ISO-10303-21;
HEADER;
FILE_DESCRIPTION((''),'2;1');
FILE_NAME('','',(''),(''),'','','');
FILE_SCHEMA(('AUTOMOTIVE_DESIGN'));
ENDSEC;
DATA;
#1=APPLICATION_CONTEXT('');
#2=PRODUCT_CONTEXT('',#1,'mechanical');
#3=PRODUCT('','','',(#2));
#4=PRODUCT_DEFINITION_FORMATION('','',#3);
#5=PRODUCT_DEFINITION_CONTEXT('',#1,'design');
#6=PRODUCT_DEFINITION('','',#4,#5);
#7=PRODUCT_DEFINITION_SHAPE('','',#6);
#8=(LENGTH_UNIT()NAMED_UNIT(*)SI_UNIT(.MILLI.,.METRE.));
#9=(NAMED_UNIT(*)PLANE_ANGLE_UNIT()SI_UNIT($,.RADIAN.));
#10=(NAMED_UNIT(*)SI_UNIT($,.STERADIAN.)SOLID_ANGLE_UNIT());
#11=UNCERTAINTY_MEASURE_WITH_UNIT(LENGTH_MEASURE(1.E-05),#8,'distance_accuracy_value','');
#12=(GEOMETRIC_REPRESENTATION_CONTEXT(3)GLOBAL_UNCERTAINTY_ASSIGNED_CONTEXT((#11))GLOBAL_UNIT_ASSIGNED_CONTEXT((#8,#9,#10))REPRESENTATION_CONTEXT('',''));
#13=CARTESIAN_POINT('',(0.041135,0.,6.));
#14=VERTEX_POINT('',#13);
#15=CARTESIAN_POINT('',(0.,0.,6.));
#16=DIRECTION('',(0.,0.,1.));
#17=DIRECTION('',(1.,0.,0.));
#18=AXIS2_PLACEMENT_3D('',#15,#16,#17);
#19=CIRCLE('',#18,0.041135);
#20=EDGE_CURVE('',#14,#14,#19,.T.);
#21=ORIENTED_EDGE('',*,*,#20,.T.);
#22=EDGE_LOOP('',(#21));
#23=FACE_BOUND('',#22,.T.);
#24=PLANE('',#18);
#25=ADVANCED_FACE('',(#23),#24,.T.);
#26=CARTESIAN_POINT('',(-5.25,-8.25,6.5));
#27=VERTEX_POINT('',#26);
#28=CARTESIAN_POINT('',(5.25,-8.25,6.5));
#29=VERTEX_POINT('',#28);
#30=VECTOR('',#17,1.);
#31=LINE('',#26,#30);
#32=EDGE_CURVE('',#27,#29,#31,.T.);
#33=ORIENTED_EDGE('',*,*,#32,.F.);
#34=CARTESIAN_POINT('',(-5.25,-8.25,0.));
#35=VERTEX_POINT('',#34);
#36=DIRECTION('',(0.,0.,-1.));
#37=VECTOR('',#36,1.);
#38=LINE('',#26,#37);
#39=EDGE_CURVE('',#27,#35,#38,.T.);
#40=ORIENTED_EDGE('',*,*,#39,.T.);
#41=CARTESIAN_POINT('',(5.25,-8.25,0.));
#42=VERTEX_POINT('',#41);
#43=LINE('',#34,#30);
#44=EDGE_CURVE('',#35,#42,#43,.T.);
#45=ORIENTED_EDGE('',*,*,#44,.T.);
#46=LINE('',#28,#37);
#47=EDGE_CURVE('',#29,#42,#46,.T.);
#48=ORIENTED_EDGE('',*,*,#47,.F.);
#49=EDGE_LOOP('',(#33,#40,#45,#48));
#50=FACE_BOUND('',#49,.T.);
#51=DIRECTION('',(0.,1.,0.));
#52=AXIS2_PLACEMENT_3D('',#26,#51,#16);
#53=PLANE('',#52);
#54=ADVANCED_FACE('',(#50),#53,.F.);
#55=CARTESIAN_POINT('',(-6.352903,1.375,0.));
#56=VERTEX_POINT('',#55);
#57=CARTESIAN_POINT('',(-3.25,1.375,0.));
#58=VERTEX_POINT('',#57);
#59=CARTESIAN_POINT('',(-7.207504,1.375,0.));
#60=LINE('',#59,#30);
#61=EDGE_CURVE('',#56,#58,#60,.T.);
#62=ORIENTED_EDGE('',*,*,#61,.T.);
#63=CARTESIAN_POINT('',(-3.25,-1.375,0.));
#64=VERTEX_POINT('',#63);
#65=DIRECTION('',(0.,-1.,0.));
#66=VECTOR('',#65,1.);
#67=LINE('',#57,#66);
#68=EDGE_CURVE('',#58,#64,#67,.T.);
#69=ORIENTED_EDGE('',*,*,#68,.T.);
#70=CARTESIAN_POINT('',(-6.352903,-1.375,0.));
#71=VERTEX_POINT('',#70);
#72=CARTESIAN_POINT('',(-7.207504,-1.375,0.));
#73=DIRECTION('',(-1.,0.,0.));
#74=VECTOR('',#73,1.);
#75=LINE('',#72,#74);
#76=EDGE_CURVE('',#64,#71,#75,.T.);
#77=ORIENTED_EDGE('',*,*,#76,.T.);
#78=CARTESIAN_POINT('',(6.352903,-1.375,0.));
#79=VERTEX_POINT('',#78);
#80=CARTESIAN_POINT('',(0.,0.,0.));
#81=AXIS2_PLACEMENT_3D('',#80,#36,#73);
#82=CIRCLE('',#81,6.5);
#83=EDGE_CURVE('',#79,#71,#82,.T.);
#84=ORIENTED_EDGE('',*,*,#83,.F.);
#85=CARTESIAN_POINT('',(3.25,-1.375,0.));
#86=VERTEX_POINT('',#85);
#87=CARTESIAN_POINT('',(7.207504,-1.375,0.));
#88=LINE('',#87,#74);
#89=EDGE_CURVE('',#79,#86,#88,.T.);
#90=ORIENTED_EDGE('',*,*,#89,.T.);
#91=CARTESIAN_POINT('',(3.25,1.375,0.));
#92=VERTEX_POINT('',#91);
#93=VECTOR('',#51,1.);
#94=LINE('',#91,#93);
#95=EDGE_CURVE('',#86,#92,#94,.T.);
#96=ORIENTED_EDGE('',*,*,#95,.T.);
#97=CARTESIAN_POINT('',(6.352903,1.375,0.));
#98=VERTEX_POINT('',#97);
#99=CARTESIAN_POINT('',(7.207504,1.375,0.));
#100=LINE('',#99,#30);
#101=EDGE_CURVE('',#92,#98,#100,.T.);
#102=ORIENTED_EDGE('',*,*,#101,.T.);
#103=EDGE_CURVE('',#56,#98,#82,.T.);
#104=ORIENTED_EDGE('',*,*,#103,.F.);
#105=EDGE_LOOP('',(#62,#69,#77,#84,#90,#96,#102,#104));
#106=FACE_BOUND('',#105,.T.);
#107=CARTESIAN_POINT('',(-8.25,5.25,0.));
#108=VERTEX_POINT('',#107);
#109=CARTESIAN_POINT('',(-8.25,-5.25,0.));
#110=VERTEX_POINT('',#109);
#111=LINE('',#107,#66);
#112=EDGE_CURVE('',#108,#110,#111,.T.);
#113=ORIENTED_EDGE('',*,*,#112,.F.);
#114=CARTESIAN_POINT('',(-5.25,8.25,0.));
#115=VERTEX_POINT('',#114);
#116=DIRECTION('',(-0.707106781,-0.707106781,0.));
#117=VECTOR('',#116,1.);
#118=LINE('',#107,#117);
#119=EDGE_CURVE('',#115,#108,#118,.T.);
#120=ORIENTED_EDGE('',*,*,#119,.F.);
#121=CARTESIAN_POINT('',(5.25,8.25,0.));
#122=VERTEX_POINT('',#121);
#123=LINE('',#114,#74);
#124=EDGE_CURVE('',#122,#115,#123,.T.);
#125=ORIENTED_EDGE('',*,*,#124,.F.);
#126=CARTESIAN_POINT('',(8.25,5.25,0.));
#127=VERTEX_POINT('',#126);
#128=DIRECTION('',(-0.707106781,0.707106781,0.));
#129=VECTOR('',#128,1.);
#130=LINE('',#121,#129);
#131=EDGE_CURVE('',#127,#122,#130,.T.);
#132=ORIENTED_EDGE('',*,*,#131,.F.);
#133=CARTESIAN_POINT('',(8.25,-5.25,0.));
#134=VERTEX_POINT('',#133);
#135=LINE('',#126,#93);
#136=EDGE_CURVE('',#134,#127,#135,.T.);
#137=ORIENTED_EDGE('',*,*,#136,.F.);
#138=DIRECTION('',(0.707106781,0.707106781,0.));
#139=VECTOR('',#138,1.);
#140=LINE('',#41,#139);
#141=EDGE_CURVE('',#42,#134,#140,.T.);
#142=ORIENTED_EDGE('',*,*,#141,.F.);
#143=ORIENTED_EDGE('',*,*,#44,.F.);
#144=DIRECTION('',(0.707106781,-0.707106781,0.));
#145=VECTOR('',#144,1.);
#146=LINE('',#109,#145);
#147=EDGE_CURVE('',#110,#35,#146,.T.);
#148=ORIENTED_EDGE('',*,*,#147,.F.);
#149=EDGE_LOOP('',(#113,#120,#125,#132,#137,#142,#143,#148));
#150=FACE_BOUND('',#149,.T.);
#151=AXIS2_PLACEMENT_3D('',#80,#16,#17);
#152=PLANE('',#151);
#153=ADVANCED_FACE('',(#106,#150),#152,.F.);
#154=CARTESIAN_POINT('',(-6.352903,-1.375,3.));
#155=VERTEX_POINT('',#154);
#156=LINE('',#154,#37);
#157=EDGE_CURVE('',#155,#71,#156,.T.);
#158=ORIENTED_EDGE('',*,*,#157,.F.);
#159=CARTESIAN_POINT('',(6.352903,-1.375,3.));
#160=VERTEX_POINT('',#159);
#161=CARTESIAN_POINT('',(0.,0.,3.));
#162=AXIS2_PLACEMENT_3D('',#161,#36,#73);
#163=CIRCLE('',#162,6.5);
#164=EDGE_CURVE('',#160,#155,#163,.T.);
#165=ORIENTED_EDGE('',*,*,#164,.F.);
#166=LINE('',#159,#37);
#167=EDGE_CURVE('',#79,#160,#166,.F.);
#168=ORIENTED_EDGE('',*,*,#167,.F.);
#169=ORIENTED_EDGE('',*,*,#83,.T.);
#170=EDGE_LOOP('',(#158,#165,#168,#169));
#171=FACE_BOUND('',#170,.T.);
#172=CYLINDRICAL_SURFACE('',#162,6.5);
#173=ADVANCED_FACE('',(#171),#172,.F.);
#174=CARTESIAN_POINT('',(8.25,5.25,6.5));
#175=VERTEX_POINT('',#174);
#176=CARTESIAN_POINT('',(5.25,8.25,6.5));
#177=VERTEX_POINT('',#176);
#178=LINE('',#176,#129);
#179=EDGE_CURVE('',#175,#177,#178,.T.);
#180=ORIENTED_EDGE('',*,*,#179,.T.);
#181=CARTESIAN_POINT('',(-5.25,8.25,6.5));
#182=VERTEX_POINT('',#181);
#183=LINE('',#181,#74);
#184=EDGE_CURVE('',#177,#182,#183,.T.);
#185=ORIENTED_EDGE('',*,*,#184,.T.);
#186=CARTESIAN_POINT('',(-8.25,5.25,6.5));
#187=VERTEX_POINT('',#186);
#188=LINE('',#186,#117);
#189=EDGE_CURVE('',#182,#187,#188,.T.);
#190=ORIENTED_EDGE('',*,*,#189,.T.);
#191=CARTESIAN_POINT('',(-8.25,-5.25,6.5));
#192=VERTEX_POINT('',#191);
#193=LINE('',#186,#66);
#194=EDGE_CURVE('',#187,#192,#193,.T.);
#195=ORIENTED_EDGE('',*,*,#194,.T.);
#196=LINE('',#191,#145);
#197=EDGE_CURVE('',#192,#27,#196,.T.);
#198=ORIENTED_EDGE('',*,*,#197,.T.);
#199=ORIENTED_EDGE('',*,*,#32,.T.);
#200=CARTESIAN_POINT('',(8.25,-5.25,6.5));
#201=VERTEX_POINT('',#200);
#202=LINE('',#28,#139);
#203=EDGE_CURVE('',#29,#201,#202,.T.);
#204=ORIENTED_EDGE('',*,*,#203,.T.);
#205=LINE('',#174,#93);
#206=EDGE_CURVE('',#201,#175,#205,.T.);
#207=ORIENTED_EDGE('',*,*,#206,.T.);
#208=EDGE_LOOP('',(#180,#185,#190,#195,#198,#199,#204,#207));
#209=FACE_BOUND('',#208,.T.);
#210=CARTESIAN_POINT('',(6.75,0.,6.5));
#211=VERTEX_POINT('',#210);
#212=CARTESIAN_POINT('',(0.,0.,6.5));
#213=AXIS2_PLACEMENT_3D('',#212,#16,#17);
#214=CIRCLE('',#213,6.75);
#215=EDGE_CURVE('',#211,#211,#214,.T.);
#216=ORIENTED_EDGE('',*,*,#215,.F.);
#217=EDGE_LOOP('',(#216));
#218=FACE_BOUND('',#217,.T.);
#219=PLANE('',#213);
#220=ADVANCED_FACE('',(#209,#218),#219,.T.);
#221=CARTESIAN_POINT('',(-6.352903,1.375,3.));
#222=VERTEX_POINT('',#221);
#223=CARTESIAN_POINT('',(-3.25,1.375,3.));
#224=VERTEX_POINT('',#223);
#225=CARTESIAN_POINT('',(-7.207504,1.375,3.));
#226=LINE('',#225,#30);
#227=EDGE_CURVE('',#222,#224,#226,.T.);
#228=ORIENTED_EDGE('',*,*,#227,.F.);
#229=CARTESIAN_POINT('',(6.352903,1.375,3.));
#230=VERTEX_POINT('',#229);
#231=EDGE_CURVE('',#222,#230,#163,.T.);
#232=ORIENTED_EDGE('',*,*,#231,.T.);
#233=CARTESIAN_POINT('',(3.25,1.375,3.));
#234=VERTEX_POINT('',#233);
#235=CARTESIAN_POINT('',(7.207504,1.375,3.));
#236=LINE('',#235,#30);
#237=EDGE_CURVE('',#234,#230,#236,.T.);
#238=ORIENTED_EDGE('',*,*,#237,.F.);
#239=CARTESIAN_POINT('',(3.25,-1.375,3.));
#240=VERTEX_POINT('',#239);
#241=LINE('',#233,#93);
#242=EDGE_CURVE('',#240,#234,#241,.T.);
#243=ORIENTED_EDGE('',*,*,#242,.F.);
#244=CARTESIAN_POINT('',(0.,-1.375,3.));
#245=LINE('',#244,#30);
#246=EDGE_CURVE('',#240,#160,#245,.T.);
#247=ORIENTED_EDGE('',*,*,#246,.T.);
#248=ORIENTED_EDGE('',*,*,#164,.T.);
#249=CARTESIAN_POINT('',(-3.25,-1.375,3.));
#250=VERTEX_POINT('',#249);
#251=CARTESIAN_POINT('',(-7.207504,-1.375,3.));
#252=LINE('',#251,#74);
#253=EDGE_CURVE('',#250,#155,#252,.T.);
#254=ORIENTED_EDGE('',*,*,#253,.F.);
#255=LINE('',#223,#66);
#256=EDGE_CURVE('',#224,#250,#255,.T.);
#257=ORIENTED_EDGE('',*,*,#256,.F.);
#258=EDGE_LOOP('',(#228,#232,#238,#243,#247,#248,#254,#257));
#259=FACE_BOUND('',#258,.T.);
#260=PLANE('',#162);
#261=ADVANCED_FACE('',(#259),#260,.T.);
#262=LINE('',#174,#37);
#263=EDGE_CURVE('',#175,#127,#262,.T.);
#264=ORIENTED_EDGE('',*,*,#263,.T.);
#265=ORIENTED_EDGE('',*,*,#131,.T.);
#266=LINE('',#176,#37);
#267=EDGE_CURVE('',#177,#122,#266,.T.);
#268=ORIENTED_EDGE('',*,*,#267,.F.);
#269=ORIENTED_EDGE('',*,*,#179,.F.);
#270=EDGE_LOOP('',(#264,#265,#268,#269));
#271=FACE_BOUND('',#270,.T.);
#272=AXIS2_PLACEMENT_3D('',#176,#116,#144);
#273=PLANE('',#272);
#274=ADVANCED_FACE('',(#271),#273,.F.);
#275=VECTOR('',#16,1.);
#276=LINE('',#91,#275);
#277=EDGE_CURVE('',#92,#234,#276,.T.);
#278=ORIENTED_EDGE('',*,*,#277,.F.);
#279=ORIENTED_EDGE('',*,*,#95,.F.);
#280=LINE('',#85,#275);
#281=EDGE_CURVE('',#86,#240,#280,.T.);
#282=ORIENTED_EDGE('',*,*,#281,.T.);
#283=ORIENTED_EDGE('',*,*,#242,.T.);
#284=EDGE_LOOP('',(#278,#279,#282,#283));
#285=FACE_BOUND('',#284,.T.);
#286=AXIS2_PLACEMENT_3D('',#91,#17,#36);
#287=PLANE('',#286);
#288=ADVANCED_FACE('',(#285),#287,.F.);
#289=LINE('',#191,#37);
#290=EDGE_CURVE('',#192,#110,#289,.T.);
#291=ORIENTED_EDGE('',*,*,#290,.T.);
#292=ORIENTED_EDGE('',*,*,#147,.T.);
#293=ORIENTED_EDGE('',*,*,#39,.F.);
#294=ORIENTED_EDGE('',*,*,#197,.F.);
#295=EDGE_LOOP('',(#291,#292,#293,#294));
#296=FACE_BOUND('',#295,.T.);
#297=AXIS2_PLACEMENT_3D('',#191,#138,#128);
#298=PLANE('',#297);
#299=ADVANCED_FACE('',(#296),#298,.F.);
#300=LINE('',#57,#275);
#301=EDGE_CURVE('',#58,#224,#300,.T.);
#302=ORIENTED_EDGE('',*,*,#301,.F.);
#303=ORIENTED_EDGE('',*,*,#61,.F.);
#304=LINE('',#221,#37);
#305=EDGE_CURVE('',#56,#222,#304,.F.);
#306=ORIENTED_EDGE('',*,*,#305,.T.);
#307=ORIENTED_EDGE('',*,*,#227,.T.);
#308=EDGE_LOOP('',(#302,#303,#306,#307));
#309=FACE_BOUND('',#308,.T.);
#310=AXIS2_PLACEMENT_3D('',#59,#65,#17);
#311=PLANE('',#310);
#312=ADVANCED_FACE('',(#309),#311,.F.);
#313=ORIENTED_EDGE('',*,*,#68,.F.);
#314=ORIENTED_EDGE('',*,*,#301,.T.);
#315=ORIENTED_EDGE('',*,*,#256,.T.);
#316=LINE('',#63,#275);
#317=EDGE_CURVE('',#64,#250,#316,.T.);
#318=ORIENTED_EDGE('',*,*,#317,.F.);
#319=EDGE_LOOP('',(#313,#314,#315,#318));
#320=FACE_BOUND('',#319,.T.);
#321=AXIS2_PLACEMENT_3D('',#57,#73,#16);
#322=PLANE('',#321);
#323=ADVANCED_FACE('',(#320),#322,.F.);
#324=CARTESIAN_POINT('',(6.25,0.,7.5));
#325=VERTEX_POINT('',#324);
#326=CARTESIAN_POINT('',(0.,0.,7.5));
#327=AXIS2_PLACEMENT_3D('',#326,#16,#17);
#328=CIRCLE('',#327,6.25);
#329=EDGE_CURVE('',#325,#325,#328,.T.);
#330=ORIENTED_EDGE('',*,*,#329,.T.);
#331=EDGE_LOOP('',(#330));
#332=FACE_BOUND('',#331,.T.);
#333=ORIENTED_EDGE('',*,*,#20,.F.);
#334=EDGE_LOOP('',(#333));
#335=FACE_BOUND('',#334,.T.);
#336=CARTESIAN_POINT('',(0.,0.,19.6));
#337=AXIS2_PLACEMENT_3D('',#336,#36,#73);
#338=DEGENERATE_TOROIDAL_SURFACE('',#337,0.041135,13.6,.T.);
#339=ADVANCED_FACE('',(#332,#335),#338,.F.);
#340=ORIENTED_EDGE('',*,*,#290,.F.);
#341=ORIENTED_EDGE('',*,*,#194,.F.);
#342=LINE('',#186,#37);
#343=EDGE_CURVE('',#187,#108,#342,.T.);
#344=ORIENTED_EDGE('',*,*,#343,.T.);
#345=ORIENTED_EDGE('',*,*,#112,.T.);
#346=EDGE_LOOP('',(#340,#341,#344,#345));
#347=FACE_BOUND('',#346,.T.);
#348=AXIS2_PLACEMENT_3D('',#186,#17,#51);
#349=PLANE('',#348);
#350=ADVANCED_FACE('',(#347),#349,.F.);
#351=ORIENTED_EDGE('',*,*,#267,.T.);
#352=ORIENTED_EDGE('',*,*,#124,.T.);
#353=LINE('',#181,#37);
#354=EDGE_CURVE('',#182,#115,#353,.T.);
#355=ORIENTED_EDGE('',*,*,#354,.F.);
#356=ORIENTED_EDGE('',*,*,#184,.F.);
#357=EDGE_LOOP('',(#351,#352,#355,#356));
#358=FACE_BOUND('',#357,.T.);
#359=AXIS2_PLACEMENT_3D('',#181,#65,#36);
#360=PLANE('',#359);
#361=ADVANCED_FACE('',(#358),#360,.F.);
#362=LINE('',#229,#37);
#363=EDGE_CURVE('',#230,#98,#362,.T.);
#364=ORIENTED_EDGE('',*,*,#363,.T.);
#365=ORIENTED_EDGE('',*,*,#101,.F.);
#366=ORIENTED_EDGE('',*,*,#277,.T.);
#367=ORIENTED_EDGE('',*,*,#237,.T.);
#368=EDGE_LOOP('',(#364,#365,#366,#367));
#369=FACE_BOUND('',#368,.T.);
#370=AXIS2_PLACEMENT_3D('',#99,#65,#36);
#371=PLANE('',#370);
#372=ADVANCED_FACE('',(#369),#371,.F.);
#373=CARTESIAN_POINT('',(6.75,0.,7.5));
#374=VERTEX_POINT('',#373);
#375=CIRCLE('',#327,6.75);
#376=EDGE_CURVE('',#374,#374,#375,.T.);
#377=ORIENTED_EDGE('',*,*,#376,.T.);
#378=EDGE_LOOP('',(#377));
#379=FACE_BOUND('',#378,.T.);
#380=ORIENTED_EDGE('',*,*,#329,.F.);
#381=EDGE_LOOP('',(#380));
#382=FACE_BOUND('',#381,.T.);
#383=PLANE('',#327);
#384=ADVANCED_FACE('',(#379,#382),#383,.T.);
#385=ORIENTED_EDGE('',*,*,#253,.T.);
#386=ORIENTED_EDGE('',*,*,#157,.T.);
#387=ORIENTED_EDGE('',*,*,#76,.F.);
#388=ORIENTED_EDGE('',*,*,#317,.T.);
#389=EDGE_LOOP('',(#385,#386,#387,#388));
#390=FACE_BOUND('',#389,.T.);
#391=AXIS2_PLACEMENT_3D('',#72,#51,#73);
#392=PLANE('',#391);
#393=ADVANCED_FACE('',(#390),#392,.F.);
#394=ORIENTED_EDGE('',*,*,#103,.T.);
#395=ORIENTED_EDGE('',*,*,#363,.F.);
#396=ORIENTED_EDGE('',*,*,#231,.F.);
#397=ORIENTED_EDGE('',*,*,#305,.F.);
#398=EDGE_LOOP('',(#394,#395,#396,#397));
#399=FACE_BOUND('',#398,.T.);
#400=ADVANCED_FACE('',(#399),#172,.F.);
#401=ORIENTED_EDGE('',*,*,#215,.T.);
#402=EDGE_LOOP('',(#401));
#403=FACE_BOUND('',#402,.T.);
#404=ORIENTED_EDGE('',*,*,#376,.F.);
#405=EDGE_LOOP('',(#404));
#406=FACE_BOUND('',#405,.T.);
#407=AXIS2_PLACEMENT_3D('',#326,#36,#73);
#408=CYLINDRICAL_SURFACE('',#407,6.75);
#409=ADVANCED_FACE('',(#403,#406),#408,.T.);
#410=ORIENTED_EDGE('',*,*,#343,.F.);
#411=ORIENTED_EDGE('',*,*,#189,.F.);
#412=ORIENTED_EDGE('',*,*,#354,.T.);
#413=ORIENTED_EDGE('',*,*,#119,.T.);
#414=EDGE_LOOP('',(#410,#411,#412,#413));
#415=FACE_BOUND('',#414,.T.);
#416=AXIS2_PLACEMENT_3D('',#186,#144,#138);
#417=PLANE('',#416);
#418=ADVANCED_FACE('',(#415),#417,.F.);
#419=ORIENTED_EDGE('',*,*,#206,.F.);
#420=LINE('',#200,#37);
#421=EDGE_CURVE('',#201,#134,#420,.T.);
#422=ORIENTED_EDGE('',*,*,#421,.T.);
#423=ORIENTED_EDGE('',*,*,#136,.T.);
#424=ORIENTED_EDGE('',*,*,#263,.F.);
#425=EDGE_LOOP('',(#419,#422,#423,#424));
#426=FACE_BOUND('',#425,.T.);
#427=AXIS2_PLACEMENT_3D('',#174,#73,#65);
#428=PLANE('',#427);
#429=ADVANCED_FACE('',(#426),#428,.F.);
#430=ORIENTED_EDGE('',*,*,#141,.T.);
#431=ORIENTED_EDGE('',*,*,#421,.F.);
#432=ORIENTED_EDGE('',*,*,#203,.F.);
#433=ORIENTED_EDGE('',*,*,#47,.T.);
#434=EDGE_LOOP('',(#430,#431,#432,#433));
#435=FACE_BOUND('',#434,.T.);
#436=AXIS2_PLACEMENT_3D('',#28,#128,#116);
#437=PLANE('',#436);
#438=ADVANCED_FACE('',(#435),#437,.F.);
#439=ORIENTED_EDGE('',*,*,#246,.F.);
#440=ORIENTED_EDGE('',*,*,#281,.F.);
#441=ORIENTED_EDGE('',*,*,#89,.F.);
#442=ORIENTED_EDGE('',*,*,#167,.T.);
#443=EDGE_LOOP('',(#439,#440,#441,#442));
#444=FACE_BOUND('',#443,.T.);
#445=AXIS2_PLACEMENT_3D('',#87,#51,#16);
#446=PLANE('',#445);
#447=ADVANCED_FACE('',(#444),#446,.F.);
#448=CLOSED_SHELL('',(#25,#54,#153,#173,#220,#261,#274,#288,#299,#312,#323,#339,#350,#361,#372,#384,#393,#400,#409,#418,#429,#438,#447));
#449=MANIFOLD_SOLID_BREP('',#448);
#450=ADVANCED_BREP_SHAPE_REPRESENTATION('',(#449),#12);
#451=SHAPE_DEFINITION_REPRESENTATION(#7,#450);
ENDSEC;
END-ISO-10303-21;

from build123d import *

# Parameters (mm, degrees)
BOSS_EXTRUDE2_DEPTH = 6.5
SKETCH2_R           = 6.25
CUT_EXTRUDE1_DEPTH  = 0.5
BOSS_EXTRUDE6_START = 1
SKETCH8_R           = 6.75
SKETCH8_R_2         = 6.25
BOSS_EXTRUDE6_DEPTH = 1
FILLET5_R           = 13.6
SKETCH3_R           = 6.5
CUT_EXTRUDE2_DEPTH  = 3
SKETCH9_W           = 3.957503607
SKETCH9_H           = 2.75
BOSS_EXTRUDE7_DEPTH = 3


with BuildPart() as part:
    # Sketch1 → Boss-Extrude2 (new body)
    with BuildSketch(Plane.XY):
        Polygon((-8.25, -5.25), (-5.25, -8.25), (5.25, -8.25), (8.25, -5.25), (8.25, 5.25), (5.25, 8.25), (-5.25, 8.25), (-8.25, 5.25), align=None)
    extrude(amount=BOSS_EXTRUDE2_DEPTH)

    # Sketch2 → Cut-Extrude1 (cut)
    with BuildSketch(Plane.XY.offset(6.5)):
        Circle(SKETCH2_R)
    extrude(amount=-CUT_EXTRUDE1_DEPTH, mode=Mode.SUBTRACT)

    # Sketch8 → Boss-Extrude6 (add)
    with BuildSketch(Plane.XY.offset(6.5).offset(BOSS_EXTRUDE6_START)):
        Circle(SKETCH8_R)
        Circle(SKETCH8_R_2, mode=Mode.SUBTRACT)
    extrude(amount=-BOSS_EXTRUDE6_DEPTH)

    # Fillet5
    # the kernel refuses this fillet: 13.6 mm, written as the material it adds along each edge
    with BuildSketch(Plane(origin=(0, 0, 6), x_dir=(1, 0, 0), z_dir=(0, -1, 0))) as fillet5_piece_1:
        with BuildLine():
            CenterArc((0.041135369, 13.6), FILLET5_R, 270, 27.163688564)
            Line((0.041135369, 0), (0.041135369, -0.272))
            Line((0.041135369, -0.272), (6.25, -0.272))
            Line((6.25, -0.272), (6.522, 0))
            ThreePointArc((6.522, 0), (6.522, 0.75), (6.374177293, 1.258))
            Line((6.374177293, 1.258), (6.25, 1.5))
        make_face()
    revolve(axis=Axis((0, 0, 6), (0, 0, 1)))

    # Sketch3 → Cut-Extrude2 (cut)
    with BuildSketch(Plane(origin=(0, 0, 0), x_dir=(-1, 0, 0), z_dir=(0, 0, -1))):
        Circle(SKETCH3_R)
    extrude(amount=-CUT_EXTRUDE2_DEPTH, mode=Mode.SUBTRACT)

    # Sketch9 → Boss-Extrude7 (add)
    with BuildSketch(Plane(origin=(0, 0, 3), x_dir=(-1, 0, 0), z_dir=(0, 0, -1))):
        with Locations((-5.228751803, 0)):
            Rectangle(SKETCH9_W, SKETCH9_H)
        with Locations((5.228751803, 0)):
            Rectangle(SKETCH9_W, SKETCH9_H)
    extrude(amount=BOSS_EXTRUDE7_DEPTH)


solid = part.part
